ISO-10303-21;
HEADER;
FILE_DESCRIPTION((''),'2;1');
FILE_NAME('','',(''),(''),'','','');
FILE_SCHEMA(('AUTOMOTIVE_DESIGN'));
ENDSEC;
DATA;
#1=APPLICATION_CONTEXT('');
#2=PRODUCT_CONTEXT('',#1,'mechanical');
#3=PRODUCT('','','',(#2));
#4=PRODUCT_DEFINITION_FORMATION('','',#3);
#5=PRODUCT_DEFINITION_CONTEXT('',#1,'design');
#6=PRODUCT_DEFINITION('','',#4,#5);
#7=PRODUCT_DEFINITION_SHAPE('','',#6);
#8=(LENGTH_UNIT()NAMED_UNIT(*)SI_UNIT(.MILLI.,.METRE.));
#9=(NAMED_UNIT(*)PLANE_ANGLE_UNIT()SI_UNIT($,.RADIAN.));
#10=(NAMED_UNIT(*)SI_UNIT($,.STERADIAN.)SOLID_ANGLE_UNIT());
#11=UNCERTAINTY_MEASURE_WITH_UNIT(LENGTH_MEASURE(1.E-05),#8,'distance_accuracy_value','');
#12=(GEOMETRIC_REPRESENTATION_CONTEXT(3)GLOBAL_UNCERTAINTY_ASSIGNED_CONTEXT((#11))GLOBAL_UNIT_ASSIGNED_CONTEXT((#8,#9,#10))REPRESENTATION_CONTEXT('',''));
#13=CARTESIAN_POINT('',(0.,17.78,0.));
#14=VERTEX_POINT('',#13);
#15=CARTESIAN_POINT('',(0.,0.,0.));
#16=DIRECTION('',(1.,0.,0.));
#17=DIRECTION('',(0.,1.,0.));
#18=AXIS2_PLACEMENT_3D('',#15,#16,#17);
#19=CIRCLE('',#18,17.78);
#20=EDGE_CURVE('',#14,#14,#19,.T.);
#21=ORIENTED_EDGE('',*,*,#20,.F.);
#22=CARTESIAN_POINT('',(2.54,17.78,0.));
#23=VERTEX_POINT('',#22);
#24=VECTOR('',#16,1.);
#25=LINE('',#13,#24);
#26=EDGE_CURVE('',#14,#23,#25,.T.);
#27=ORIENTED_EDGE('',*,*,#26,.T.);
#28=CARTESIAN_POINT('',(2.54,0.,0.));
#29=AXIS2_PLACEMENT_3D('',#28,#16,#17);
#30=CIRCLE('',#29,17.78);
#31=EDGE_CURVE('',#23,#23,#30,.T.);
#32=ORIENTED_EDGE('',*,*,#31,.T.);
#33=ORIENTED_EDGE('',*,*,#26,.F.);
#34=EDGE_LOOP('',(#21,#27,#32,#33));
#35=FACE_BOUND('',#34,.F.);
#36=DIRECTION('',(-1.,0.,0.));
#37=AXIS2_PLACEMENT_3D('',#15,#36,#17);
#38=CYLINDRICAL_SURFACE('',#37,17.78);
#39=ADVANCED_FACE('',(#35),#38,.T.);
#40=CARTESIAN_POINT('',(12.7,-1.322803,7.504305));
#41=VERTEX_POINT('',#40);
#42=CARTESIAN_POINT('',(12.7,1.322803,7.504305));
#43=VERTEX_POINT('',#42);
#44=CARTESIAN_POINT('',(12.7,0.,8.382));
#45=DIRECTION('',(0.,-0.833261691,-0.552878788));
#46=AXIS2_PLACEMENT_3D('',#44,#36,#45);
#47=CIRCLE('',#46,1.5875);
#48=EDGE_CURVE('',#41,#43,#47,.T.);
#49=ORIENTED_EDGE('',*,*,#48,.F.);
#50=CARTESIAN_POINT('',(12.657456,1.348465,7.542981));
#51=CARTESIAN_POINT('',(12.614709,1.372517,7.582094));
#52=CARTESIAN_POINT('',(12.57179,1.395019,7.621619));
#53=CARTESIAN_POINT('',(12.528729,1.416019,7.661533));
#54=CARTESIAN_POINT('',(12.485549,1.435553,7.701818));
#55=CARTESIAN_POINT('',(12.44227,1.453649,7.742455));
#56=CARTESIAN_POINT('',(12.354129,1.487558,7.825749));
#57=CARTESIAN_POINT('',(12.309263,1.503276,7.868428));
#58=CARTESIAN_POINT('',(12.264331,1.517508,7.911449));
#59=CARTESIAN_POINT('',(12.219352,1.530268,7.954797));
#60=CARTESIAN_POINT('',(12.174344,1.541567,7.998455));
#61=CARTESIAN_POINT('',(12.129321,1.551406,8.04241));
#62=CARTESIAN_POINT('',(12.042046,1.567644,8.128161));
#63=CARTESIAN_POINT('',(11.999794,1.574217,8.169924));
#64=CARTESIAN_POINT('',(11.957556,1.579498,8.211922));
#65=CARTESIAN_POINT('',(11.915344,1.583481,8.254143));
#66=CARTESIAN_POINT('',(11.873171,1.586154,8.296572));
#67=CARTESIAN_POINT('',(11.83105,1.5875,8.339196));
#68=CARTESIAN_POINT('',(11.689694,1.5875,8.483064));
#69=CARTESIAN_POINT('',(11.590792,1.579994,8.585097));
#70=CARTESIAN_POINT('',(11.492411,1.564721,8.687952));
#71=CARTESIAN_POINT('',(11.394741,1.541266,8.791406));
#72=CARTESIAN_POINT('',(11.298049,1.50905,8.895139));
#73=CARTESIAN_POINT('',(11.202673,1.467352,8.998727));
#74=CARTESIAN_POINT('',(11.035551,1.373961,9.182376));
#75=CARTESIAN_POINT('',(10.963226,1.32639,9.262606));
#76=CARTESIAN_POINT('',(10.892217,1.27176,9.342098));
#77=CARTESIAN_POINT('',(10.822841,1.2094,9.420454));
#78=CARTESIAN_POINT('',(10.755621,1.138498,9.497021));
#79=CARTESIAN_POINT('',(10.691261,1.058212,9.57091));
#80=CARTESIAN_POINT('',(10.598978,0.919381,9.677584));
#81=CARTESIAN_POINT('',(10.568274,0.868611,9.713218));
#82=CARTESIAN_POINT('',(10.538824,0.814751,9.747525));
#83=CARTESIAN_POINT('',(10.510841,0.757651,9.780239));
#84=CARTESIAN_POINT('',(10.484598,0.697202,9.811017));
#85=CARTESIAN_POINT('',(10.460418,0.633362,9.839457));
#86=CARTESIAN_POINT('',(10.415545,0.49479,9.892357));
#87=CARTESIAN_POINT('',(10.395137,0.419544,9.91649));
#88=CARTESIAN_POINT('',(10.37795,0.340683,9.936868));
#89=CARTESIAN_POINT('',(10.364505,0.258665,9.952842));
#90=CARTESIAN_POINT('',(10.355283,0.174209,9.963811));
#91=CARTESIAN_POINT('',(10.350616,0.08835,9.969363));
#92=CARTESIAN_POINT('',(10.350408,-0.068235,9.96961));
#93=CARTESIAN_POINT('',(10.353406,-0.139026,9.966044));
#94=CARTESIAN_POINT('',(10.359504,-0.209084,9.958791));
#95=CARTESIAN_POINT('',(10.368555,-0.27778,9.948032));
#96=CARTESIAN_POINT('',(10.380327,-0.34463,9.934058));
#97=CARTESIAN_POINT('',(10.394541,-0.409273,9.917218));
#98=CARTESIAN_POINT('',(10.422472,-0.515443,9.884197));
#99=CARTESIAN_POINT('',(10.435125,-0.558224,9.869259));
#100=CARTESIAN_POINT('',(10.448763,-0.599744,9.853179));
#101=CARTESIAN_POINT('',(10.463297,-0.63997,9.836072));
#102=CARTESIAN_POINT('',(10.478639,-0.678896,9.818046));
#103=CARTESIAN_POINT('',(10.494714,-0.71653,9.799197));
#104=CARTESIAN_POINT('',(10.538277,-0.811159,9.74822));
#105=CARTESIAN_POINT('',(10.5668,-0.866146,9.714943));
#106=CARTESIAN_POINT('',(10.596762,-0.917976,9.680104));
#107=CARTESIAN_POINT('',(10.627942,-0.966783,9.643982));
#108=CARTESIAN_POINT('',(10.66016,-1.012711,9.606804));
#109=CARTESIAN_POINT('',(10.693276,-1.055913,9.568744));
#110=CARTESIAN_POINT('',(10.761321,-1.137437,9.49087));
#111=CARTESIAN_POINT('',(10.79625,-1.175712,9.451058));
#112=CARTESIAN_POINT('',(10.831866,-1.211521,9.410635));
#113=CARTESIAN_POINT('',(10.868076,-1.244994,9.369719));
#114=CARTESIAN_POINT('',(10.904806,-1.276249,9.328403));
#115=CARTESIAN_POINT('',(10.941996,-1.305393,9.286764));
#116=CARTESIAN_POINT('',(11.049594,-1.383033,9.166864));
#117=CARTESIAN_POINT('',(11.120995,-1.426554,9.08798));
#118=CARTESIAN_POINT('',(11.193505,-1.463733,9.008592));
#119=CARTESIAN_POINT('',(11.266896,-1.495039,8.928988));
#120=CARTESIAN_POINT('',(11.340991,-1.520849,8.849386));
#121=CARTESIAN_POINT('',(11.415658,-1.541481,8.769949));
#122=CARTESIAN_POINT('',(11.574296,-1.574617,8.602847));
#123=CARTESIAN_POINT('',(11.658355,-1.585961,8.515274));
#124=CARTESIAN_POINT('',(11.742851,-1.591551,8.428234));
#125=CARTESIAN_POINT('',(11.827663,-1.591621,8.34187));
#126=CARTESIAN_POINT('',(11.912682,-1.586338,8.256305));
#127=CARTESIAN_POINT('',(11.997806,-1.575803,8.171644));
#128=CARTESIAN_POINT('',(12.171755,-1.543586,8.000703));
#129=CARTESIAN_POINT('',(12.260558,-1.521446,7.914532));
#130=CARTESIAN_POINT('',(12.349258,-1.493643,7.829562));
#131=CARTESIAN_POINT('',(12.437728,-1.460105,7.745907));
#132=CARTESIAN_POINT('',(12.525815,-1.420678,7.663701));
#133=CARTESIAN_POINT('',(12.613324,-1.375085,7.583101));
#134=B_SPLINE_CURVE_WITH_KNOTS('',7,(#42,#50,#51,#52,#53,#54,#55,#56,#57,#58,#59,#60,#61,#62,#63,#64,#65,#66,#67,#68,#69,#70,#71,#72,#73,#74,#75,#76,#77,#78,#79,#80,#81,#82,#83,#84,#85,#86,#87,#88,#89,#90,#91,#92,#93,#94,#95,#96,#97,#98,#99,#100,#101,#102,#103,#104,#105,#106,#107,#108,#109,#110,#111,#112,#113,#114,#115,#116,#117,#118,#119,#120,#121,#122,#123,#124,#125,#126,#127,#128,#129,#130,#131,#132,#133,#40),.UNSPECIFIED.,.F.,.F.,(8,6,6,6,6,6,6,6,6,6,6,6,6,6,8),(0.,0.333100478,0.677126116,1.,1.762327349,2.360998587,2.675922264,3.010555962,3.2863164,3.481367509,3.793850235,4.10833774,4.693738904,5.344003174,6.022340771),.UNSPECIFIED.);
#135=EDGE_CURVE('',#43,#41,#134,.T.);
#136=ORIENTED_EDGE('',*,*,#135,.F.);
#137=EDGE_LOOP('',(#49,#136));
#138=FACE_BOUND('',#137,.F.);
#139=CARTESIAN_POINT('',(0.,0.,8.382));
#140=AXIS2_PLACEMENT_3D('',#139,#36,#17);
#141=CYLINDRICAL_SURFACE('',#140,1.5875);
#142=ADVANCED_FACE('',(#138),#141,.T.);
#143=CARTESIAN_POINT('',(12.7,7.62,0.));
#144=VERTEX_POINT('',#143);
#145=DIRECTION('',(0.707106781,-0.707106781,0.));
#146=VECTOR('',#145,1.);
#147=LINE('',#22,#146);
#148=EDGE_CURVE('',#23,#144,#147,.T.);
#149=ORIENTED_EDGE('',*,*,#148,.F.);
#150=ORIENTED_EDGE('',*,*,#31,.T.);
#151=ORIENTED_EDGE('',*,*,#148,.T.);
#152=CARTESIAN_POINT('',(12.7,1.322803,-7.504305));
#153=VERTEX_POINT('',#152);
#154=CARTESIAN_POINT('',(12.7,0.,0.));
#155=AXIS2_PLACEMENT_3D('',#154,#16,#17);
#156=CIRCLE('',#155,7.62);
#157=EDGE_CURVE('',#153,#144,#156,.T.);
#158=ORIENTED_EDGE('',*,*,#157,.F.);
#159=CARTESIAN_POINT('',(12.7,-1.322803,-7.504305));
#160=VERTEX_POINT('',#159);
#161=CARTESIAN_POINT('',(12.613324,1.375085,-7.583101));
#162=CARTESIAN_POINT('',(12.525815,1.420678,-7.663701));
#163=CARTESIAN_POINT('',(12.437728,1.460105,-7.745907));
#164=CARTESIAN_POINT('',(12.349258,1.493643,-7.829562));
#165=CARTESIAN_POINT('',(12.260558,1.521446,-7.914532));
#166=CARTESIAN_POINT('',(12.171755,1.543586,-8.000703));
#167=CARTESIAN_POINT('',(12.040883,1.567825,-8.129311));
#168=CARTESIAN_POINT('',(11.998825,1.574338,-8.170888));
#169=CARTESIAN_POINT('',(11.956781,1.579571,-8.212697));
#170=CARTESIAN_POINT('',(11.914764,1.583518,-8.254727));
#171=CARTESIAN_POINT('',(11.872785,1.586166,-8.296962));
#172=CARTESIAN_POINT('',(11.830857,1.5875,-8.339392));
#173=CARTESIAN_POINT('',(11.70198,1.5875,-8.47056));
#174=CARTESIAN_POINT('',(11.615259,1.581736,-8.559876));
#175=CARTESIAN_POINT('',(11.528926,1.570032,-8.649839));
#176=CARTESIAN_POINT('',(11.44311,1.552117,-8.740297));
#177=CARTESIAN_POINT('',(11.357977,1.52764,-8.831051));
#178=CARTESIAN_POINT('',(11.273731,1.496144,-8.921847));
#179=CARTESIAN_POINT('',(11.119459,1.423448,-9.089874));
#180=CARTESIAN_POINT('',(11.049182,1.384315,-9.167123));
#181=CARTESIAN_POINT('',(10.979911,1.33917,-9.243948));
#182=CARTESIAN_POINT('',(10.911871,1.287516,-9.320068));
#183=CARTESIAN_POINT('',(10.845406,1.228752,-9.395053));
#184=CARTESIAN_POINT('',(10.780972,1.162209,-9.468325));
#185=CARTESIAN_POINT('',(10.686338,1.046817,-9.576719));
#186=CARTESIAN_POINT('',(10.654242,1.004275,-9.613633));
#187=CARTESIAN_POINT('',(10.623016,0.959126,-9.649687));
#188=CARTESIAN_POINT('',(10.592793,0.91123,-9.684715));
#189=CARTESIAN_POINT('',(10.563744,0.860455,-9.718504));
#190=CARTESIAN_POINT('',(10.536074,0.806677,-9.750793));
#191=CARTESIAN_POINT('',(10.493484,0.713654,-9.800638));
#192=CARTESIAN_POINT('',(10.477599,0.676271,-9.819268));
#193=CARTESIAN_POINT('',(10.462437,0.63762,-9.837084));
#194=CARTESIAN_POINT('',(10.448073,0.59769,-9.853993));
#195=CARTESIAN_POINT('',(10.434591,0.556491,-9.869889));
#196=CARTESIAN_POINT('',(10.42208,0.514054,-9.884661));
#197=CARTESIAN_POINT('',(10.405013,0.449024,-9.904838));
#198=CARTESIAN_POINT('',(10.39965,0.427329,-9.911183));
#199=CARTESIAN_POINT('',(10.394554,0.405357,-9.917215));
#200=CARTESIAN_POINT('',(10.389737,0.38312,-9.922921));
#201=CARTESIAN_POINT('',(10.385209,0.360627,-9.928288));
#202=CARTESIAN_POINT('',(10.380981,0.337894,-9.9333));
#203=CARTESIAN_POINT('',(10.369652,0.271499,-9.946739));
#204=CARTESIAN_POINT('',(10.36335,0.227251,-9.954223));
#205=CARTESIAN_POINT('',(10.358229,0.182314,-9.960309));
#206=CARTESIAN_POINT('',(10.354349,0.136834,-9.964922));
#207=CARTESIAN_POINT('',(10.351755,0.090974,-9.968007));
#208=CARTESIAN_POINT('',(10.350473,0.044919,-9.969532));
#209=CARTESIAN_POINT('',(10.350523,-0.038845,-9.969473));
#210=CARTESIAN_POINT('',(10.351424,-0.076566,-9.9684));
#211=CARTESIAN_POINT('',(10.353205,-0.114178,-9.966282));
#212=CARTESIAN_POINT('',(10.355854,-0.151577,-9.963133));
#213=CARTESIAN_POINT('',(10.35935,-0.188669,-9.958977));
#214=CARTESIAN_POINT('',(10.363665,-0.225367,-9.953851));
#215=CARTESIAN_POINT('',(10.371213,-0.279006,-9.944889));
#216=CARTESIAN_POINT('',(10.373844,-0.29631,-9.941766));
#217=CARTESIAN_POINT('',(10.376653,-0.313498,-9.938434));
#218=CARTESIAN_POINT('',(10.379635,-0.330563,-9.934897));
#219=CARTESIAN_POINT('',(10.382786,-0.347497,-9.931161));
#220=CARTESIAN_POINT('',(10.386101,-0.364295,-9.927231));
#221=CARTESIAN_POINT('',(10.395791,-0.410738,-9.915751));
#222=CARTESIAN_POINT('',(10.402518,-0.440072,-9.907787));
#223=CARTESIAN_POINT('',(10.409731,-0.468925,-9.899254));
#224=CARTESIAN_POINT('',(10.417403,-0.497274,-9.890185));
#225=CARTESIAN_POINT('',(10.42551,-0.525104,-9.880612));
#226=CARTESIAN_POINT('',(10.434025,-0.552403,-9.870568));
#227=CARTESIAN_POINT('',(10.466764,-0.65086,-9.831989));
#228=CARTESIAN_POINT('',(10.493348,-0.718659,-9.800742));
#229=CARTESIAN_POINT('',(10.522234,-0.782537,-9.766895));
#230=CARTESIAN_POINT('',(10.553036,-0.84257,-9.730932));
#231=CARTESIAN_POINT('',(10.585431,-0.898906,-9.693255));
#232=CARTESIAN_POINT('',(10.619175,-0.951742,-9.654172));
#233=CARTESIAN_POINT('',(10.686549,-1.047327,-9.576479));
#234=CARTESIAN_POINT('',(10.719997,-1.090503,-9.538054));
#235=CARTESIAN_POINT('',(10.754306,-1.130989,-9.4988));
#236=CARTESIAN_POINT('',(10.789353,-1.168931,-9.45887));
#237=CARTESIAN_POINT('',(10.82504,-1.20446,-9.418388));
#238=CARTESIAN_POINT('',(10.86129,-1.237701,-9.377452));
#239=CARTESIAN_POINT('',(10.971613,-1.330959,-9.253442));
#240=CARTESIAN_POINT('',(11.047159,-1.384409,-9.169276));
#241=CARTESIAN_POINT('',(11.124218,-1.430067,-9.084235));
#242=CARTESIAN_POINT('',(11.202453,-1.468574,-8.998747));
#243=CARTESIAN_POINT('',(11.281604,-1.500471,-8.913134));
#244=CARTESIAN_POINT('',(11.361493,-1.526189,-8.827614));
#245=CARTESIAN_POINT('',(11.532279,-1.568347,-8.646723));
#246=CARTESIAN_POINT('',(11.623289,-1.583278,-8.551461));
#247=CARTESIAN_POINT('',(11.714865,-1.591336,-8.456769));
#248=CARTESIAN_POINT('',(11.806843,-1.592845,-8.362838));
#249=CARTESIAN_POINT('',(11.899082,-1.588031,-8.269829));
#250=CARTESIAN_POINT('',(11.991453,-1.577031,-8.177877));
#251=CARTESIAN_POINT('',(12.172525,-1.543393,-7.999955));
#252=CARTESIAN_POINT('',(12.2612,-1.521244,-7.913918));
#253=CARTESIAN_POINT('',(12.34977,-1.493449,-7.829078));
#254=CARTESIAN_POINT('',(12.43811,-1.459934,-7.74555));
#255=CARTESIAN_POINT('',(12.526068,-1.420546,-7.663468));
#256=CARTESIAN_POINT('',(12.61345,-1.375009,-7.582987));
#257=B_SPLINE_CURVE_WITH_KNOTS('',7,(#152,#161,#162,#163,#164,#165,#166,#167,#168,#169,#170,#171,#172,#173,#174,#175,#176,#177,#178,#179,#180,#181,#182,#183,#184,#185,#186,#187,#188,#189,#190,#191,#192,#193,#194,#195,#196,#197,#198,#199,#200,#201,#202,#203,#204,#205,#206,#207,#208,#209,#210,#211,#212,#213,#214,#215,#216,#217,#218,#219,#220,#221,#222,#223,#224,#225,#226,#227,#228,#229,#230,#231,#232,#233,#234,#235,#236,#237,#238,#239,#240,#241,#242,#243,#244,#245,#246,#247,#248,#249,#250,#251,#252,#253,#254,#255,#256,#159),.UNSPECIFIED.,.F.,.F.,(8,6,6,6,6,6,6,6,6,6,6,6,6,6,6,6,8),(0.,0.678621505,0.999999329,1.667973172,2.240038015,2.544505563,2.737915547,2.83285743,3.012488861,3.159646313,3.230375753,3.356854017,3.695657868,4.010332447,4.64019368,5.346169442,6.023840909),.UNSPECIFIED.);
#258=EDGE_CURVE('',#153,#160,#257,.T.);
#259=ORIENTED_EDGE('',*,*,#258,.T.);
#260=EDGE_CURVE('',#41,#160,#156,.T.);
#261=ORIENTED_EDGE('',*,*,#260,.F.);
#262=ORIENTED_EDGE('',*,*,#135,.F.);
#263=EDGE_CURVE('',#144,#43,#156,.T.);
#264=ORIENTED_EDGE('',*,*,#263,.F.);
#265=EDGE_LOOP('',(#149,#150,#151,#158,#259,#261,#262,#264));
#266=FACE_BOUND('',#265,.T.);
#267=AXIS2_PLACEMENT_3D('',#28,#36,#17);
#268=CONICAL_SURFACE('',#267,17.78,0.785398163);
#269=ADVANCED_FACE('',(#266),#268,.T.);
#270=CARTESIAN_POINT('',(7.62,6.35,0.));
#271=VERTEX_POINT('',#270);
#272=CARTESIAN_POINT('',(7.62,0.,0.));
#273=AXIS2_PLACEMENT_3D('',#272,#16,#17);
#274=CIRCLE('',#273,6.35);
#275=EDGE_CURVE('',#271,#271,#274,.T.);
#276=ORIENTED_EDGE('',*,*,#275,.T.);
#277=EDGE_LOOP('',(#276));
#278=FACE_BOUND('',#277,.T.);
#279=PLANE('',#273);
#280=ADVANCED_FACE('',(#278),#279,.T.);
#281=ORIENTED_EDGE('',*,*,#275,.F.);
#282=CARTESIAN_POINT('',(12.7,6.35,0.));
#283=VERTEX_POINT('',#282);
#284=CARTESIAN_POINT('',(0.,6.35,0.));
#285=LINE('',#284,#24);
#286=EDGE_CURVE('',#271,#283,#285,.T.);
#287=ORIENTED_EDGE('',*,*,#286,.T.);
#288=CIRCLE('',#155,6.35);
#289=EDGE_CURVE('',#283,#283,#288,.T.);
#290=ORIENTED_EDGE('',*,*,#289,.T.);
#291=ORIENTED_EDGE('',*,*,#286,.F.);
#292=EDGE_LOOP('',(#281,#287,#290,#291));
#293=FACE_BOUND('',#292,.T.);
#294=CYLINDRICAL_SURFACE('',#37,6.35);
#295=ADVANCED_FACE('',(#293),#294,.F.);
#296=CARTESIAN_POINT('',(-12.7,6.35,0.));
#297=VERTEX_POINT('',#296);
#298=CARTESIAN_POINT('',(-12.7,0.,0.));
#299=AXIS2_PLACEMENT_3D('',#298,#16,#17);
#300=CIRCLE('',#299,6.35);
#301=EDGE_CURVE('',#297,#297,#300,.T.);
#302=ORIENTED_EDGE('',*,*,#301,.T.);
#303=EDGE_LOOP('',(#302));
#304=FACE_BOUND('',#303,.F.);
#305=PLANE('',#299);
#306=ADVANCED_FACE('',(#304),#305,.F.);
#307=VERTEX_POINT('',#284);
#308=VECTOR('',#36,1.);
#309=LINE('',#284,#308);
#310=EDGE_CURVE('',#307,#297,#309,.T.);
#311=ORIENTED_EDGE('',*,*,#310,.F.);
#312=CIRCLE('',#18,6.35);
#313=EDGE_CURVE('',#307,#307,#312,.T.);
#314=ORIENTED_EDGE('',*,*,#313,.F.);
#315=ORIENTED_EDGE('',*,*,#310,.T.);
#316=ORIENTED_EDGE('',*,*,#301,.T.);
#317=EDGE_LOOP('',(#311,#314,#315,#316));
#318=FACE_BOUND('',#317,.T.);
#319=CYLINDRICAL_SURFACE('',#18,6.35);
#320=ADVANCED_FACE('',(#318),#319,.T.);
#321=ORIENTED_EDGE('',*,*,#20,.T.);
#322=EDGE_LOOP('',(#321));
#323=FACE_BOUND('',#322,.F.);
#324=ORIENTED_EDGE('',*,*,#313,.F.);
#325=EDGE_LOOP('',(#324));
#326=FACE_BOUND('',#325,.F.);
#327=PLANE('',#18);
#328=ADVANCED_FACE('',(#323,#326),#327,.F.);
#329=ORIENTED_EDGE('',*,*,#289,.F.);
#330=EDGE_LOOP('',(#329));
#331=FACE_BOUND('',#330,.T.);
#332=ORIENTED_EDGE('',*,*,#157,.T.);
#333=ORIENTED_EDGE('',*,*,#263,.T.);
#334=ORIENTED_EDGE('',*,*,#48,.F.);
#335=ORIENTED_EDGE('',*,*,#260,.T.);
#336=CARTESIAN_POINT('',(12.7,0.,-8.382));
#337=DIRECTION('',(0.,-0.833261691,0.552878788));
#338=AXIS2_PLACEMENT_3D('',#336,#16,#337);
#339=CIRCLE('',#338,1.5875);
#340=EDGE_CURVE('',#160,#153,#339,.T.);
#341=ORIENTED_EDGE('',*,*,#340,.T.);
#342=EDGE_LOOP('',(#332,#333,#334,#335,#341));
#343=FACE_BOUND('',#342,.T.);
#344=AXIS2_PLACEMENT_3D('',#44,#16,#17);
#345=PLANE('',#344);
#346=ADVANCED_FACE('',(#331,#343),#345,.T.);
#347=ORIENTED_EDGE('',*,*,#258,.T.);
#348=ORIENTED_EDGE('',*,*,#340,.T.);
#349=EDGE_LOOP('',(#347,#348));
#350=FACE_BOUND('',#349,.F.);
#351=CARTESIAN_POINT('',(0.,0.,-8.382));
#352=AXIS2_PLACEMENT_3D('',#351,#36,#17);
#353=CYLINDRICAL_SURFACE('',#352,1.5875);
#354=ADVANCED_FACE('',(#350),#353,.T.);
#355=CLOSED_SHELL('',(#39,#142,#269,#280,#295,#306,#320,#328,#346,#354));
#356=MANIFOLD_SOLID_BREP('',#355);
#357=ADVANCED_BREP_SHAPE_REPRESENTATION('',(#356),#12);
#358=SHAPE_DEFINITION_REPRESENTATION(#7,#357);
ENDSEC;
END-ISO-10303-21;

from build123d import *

# Parameters (mm, degrees)
F0_R     = 17.78
F0_R_2   = 1.5875
F0_R_3   = 6.35
F1_DEPTH = 12.7
F3_DEPTH = 7.62
F4_DEPTH = 12.7
F5_DEPTH = 12.7


# Not quite as in the source:
# - a fillet or chamfer that OpenCascade refuses, or shapes differently, is made with other operations: its cross-section is extruded or revolved along the edge and cut away or added


with BuildPart() as f1:
    # F0 (on Right) → F1 (new body)
    with BuildSketch(Plane.YZ):
        Circle(F0_R)
        with Locations((0, -8.382)):
            Circle(F0_R_2, mode=Mode.SUBTRACT)
        Circle(F0_R_3, mode=Mode.SUBTRACT)
        with Locations((0, 8.382)):
            Circle(F0_R_2, mode=Mode.SUBTRACT)
    extrude(amount=F1_DEPTH)

    # F2: chamfer of 10.16 on 1 edges, made by hand

    # F2_s1 → F2_t2 (revolve, cut)
    with BuildSketch(Plane.XY):
        Polygon((2.54, 17.78), (12.7, 7.62), (12.7, 17.78), align=None)
    revolve(axis=Axis((12.7, 0, 0), (1, 0, 0)), mode=Mode.SUBTRACT)

    # F0 (on Right) → F3 (join)
    with BuildSketch(Plane.YZ):
        Circle(F0_R_3)
    extrude(amount=F3_DEPTH)

    # F0 (on Right) → F4 (join)
    with BuildSketch(Plane.YZ):
        with Locations((0, 8.382)):
            Circle(F0_R_2)
        with Locations((0, -8.382)):
            Circle(F0_R_2)
    extrude(amount=F4_DEPTH)

    # F0 (on Right) → F5 (join)
    with BuildSketch(Plane.YZ):
        Circle(F0_R_3)
    extrude(amount=-F5_DEPTH)


solid = f1.part
